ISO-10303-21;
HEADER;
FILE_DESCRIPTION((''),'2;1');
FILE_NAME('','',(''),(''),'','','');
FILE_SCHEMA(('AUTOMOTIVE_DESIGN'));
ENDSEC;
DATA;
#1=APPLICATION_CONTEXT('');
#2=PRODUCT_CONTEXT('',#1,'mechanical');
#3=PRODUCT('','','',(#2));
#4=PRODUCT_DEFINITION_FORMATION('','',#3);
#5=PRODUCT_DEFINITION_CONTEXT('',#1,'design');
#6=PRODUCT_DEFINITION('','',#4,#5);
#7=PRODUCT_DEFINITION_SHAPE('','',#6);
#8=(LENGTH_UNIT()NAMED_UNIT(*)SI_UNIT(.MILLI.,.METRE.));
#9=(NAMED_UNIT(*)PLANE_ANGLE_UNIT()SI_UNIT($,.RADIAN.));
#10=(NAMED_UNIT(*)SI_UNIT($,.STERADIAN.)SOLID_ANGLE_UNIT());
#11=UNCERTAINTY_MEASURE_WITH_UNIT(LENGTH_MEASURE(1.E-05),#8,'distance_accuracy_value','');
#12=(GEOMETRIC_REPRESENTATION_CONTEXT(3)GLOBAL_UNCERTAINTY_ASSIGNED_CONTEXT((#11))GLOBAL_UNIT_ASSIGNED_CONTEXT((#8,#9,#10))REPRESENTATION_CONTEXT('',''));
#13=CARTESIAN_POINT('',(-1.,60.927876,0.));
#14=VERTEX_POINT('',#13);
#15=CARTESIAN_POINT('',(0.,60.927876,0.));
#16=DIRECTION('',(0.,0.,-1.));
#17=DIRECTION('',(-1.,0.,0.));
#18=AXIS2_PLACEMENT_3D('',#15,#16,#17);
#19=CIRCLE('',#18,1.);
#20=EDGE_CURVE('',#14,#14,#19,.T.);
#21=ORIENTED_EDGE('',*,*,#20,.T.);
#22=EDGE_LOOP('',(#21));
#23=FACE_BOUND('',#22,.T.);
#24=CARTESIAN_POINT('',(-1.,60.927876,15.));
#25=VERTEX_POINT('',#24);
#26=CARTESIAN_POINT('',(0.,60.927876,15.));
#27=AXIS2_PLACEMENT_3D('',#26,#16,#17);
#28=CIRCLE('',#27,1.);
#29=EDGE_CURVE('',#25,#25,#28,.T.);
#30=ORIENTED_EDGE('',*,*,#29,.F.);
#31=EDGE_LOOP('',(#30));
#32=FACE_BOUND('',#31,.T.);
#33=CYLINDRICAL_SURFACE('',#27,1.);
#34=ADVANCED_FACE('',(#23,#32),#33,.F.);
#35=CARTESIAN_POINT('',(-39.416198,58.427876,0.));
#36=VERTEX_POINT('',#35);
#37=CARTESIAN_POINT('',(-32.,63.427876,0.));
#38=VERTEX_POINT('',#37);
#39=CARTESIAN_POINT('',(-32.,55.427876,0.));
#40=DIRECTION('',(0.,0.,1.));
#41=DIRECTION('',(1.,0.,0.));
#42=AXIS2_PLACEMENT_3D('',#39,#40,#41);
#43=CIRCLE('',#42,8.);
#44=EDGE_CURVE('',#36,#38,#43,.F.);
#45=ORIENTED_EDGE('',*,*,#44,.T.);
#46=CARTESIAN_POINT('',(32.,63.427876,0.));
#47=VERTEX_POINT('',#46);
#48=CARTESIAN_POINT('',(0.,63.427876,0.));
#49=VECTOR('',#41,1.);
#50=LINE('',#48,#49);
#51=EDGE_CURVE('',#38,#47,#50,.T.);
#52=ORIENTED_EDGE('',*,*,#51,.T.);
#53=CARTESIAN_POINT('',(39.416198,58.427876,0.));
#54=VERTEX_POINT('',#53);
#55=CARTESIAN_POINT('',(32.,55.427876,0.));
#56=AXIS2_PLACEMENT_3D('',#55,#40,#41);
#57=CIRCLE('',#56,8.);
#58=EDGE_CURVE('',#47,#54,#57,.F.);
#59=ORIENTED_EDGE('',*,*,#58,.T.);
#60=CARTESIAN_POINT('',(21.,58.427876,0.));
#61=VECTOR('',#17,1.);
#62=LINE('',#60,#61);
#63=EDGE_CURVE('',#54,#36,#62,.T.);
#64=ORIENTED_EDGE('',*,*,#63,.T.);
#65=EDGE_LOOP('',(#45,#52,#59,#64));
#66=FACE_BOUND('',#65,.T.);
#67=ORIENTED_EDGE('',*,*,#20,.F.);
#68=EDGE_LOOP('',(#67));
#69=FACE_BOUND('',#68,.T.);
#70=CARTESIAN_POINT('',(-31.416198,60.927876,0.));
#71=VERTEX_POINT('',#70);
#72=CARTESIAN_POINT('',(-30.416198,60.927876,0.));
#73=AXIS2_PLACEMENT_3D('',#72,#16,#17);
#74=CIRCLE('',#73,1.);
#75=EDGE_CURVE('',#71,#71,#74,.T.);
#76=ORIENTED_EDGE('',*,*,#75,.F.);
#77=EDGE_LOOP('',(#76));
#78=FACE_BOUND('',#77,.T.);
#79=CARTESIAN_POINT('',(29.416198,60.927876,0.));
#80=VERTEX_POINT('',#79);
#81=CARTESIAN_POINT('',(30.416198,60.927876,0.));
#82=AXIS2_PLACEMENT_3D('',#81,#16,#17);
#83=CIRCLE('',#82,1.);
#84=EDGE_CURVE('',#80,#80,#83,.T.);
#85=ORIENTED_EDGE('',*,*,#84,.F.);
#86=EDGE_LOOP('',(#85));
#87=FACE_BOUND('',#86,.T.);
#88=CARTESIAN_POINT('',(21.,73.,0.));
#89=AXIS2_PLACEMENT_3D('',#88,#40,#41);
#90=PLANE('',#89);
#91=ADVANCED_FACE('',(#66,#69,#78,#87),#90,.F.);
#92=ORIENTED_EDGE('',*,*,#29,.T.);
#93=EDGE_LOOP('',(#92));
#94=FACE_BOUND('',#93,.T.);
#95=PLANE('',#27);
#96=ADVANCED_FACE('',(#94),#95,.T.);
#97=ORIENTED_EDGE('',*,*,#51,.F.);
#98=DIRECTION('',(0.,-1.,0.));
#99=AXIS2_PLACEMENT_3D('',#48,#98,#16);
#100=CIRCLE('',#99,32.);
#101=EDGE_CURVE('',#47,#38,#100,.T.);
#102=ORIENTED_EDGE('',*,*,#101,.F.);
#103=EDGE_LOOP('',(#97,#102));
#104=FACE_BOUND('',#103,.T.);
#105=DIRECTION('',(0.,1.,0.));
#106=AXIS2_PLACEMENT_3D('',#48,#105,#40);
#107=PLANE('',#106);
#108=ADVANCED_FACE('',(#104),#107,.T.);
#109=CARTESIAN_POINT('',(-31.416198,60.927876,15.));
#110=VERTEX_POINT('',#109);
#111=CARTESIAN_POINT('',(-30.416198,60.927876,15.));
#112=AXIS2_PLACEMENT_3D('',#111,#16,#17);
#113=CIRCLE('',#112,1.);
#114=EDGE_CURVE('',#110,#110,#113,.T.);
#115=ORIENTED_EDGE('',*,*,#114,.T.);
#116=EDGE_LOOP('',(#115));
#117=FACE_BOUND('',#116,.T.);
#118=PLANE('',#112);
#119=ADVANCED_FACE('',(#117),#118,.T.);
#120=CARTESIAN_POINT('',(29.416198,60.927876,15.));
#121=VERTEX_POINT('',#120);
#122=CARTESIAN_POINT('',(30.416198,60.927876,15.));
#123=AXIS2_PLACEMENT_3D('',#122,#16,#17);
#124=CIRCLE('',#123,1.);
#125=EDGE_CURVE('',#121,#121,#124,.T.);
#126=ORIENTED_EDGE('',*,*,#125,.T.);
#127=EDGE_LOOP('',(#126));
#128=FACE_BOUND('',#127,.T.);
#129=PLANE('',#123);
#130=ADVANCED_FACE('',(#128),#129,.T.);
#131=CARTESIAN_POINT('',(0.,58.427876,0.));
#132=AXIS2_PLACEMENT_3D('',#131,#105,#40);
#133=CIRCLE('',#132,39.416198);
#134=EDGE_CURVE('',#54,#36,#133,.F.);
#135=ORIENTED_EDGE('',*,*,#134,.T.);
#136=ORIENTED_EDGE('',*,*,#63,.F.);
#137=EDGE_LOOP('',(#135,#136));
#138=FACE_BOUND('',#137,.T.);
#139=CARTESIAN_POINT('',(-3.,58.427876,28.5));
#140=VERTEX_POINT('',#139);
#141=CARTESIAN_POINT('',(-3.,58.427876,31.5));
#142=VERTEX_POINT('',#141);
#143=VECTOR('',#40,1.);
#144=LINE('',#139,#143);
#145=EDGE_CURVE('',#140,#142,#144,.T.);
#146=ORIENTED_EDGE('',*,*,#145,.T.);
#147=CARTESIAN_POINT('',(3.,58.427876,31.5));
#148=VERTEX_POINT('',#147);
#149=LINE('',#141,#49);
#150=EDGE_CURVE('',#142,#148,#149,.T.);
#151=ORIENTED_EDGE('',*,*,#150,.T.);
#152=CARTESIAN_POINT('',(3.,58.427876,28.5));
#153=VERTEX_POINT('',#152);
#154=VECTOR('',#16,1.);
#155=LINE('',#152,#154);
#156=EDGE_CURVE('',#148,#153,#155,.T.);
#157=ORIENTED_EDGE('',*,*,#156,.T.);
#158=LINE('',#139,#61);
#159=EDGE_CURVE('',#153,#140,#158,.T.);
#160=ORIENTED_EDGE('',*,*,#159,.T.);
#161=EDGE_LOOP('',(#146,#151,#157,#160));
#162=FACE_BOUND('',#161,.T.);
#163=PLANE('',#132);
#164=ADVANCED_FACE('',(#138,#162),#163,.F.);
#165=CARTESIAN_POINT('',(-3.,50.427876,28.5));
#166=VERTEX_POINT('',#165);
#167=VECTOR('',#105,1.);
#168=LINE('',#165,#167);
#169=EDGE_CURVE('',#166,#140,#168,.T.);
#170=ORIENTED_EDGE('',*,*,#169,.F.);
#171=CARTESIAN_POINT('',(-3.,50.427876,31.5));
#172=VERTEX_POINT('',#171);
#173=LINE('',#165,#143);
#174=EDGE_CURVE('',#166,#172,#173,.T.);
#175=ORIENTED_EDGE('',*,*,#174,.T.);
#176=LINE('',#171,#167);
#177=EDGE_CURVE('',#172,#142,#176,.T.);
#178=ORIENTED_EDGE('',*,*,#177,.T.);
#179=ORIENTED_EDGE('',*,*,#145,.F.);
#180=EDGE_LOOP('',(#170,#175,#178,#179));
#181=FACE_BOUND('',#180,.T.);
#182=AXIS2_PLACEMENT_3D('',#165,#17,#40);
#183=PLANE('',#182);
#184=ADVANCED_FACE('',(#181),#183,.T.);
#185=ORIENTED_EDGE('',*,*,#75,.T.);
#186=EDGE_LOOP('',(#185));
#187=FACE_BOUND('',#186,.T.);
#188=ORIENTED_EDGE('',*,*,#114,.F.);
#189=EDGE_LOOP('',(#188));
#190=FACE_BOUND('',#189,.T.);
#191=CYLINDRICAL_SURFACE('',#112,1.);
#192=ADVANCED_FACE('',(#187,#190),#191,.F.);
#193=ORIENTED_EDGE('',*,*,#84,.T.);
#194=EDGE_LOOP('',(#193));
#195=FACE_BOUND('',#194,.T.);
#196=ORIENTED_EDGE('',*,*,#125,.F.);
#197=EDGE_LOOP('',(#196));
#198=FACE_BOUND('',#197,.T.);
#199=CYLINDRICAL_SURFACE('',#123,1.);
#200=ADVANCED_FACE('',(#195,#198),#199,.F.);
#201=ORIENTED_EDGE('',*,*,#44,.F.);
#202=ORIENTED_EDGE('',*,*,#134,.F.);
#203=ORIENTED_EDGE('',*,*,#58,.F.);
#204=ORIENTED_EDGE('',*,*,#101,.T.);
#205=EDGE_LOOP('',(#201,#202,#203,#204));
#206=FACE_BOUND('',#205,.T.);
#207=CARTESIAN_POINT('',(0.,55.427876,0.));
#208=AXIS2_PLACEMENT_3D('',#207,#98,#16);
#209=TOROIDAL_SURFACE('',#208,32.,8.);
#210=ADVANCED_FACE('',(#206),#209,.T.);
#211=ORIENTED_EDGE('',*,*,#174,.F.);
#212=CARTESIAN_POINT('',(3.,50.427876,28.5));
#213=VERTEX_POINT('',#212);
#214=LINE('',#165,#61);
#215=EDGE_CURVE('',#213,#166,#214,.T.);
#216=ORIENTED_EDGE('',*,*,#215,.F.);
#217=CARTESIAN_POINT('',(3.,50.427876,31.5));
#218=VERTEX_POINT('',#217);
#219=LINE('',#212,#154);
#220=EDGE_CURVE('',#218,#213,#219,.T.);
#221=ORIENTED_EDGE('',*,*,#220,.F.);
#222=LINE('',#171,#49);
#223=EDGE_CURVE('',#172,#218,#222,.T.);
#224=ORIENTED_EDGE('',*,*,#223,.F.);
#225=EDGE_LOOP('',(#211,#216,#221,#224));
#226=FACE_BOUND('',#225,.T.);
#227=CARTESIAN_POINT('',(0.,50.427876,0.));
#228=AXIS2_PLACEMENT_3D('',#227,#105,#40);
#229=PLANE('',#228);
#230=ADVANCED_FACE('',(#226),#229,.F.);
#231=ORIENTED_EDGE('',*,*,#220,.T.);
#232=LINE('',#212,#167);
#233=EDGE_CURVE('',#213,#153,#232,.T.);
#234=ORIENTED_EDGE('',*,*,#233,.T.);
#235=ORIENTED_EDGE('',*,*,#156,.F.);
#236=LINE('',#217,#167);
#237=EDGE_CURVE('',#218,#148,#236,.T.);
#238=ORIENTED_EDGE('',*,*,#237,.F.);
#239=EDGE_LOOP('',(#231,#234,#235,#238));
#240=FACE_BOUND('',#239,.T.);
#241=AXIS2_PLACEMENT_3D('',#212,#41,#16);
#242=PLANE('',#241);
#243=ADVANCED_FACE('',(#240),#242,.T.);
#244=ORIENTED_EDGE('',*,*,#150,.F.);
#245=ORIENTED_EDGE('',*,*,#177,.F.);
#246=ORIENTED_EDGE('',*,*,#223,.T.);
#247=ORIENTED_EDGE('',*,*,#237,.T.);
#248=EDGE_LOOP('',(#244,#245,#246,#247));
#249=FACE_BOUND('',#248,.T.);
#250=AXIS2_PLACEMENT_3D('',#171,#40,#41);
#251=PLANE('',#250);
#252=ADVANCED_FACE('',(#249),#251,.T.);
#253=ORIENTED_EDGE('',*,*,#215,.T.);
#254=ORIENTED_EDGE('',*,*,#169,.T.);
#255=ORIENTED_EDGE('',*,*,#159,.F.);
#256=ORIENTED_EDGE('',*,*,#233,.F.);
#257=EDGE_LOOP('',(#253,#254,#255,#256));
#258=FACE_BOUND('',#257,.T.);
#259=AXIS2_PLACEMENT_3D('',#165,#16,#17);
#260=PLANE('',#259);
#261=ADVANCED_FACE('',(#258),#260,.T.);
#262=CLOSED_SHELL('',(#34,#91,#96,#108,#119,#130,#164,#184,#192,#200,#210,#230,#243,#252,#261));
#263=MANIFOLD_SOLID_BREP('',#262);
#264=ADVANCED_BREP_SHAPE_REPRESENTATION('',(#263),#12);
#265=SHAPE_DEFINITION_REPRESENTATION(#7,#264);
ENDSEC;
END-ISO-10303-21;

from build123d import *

# Parameters (mm, degrees)
CUT_EXTRUDE3_DEPTH           = 60
CUT_EXTRUDE5_DEPTH           = 2
CUT_EXTRUDE5_DEPTH_BACK      = 30
SKETCH9_R                    = 38
SKETCH9_R_2                  = 23
SKETCH19_W                   = 12
SKETCH19_H                   = 36.5
CUT_REVOLVE2_ANGLE           = 65
CUT_REVOLVE2_OTHER_WAY_ANGLE = 65
SKETCH21_W                   = 3.25
SKETCH21_H                   = 4
BOSS_EXTRUDE3_DEPTH          = 1.35
CIRPATTERN1_COUNT            = 5
CUT_EXTRUDE9_START           = -5
CUT_EXTRUDE9_DEPTH           = 5
SKETCH23_R                   = 10.5
CUT_EXTRUDE10_DEPTH          = 10
SKETCH24_W                   = 15
SKETCH24_H                   = 8
BOSS_EXTRUDE4_DEPTH          = 8
SKETCH26_W                   = 10
SKETCH26_H                   = 6
CUT_EXTRUDE11_DEPTH          = 10
SKETCH27_W                   = 4
SKETCH27_H                   = 5
CUT_EXTRUDE12_DEPTH          = 5
CUT_EXTRUDE14_DEPTH          = 2
CUT_EXTRUDE14_DEPTH_BACK     = 30
SKETCH29_R                   = 1
CUT_EXTRUDE15_DEPTH          = 15
FILLET1_R                    = 6
FILLET2_R                    = 8
INTERSECT1_DEPTH             = 58.427876097
SKETCH31_W                   = 6
SKETCH31_H                   = 3
BOSS_EXTRUDE7_DEPTH          = 8


# Read off the part's stored shape, not the designer's step: Cut-Extrude9, Intersect1
with BuildPart() as part:
    # Sketch1 → Revolve1 (revolve)
    with BuildSketch(Plane.XY, mode=Mode.PRIVATE) as revolve1_sk:
        with BuildLine():
            Line((0, 63.427876097), (32, 63.427876097))
            ThreePointArc((32, 63.427876097), (37.656854249, 61.084730346), (40, 55.427876097))
            Line((40, 55.427876097), (40, 28.846818009))
            ThreePointArc((40, 28.846818009), (38.792081772, 24.082439968), (35.460140376, 20.469057744))
            Line((35.460140376, 20.469057744), (28.539859624, 15.958818353))
            ThreePointArc((28.539859624, 15.958818353), (25.207918228, 12.345436129), (24, 7.581058088))
            Line((24, 7.581058088), (24, 3.25))
            Line((24, 3.25), (24.35, 3))
            Line((24.35, 3), (24.35, 0))
            Line((24.35, 0), (22.5, 0))
            Line((22.5, 0), (22.5, 12.5))
            ThreePointArc((22.5, 12.5), (22.353553391, 12.853553391), (22, 13))
            Line((22, 13), (0, 13))
            Line((0, 13), (0, 63.427876097))
        make_face()
    revolve(revolve1_sk.sketch.rotate(Axis((0, 0, 0), (0, 1, 0)), 90), axis=Axis((0, 0, 0), (0, 1, 0)))

    # Sketch11 → Cut-Extrude3 (cut)
    with BuildSketch(Plane(origin=(0, 13, 0), x_dir=(-1, 0, 0), z_dir=(0, -1, 0))):
        with BuildLine():
            Line((-21, 0), (21, 0))
            ThreePointArc((21, 0), (0, 21), (-21, 0))
        make_face()
    extrude(amount=-CUT_EXTRUDE3_DEPTH, mode=Mode.SUBTRACT)

    # Sketch9 → Cut-Extrude5 (cut, two sides: drawn at the far end of the back side and taken through both)
    with BuildSketch(Plane(origin=(0, 55.427876097, 0), x_dir=(1, 0, 0), z_dir=(0, 1, 0)).offset(-CUT_EXTRUDE5_DEPTH_BACK)):
        with Locations(Location((0, 0, 0), (0, 0, 270))):
            Circle(SKETCH9_R)
        with Locations(Location((0, 0, 0), (0, 0, 270))):
            Circle(SKETCH9_R_2, mode=Mode.SUBTRACT)
    extrude(amount=CUT_EXTRUDE5_DEPTH + CUT_EXTRUDE5_DEPTH_BACK, mode=Mode.SUBTRACT)

    # Sketch19 → Cut-Revolve2 (revolve, cut)
    with BuildSketch(Plane(origin=(0, 0, 0), x_dir=(0, 0, -1), z_dir=(1, 0, 0))):
        with Locations((-41.064715832, 37.177876097)):
            Rectangle(SKETCH19_W, SKETCH19_H)
    revolve(axis=Axis((0, 0, 0), (0, 1, 0)), revolution_arc=CUT_REVOLVE2_ANGLE, mode=Mode.SUBTRACT)

    # Sketch19 → Cut-Revolve2 other way (revolve, cut)
    with BuildSketch(Plane(origin=(0, 0, 0), x_dir=(0, 0, -1), z_dir=(1, 0, 0))):
        with Locations((-41.064715832, 37.177876097)):
            Rectangle(SKETCH19_W, SKETCH19_H)
    revolve(axis=Axis((0, 0, 0), (0, -1, 0)), revolution_arc=CUT_REVOLVE2_OTHER_WAY_ANGLE, mode=Mode.SUBTRACT)

    # Sketch21 → Boss-Extrude3 (add)
    with BuildSketch(Plane(origin=(0, 0, 22.5), x_dir=(-1, 0, 0), z_dir=(0, 0, -1))):
        with Locations((0, 2)):
            Rectangle(SKETCH21_W, SKETCH21_H)
    boss_extrude3 = extrude(amount=BOSS_EXTRUDE3_DEPTH)

    # CirPattern1: Boss-Extrude3 ×5 about axis
    cirpattern1_axis = Axis((0, 0, 0), (0, 1, 0))
    for i in range(1, CIRPATTERN1_COUNT):
        add(boss_extrude3.rotate(cirpattern1_axis, i * 360 / CIRPATTERN1_COUNT))

    # Cut-Extrude9 outline → Cut-Extrude9 (cut)
    with BuildSketch(Plane(origin=(0, 63.427876097, 0), x_dir=(1, 0, 0), z_dir=(0, 1, 0)).offset(CUT_EXTRUDE9_START)):
        with BuildLine():
            ThreePointArc((40, 0), (0, 40), (-40, 0))
            Line((-40, 0), (-21, 0))
            ThreePointArc((-21, 0), (0, 21), (21, 0))
            Line((21, 0), (40, 0))
        make_face()
    extrude(amount=CUT_EXTRUDE9_DEPTH, mode=Mode.SUBTRACT)

    # Sketch23 → Cut-Extrude10 (cut)
    with BuildSketch(Plane(origin=(0, 0, -40), x_dir=(-1, 0, 0), z_dir=(0, 0, -1))):
        with Locations((0, 42.137876097)):
            Circle(SKETCH23_R)
    extrude(amount=-CUT_EXTRUDE10_DEPTH, mode=Mode.SUBTRACT)

    # Sketch24 → Boss-Extrude4 (add)
    with BuildSketch(Plane(origin=(0, 58.427876097, 0), x_dir=(1, 0, 0), z_dir=(0, 1, 0))):
        with Locations((0, 30)):
            Rectangle(SKETCH24_W, SKETCH24_H)
    extrude(amount=-BOSS_EXTRUDE4_DEPTH)

    # Sketch26 → Cut-Extrude11 (cut)
    with BuildSketch(Plane(origin=(0, 58.427876097, 0), x_dir=(1, 0, 0), z_dir=(0, 1, 0))):
        with Locations((0, 30)):
            Rectangle(SKETCH26_W, SKETCH26_H)
    extrude(amount=-CUT_EXTRUDE11_DEPTH, mode=Mode.SUBTRACT)

    # Sketch27 → Cut-Extrude12 (cut)
    with BuildSketch(Plane(origin=(7.5, 0, 0), x_dir=(0, 0, -1), z_dir=(1, 0, 0))):
        with Locations((30, 53.927876097)):
            Rectangle(SKETCH27_W, SKETCH27_H)
    extrude(amount=-CUT_EXTRUDE12_DEPTH, mode=Mode.SUBTRACT)

    # Sketch28 → Cut-Extrude14 (cut, two sides: drawn at the far end of the back side and taken through both)
    with BuildSketch(Plane(origin=(0, 55.427876097, 0), x_dir=(1, 0, 0), z_dir=(0, 1, 0)).offset(-CUT_EXTRUDE14_DEPTH_BACK)):
        with BuildLine():
            Line((-22.912878475, -2), (22.912878475, -2))
            ThreePointArc((22.912878475, -2), (0, -23), (-22.912878475, -2))
        make_face()
    extrude(amount=CUT_EXTRUDE14_DEPTH + CUT_EXTRUDE14_DEPTH_BACK, mode=Mode.SUBTRACT)

    # Sketch29 → Cut-Extrude15 (cut)
    with BuildSketch(Plane(origin=(0, 0, 0), x_dir=(-1, 0, 0), z_dir=(0, 0, -1))):
        with Locations((-30.416198487, 60.927876097)):
            Circle(SKETCH29_R)
        with Locations((30.416198487, 60.927876097)):
            Circle(SKETCH29_R)
        with Locations((0, 60.927876097)):
            Circle(SKETCH29_R)
    extrude(amount=-CUT_EXTRUDE15_DEPTH, mode=Mode.SUBTRACT)

    # Fillet1
    fillet1_edges = [part.edges().sort_by_distance(p)[0] for p in [
        (21, 35.713938048, 0),
        (-21, 35.713938048, 0),
    ]]
    fillet(fillet1_edges, radius=FILLET1_R)

    # Fillet2
    fillet2_edges = [part.edges().sort_by_distance(p)[0] for p in [
        (-22.912878475, 41.427876097, 2),
        (22.912878475, 41.427876097, 2),
    ]]
    fillet(fillet2_edges, radius=FILLET2_R)

    # Intersect1 outline → Intersect1 (cut)
    with BuildSketch(Plane(origin=(0, 0, 0), x_dir=(1, 0, 0), z_dir=(0, 1, 0))):
        with BuildLine():
            Line((-37.508702776, -13.895942431), (-42, -15.355253362))
            Line((-42, -15.355253362), (-42, -41))
            Line((-42, -41), (42, -41))
            Line((42, -41), (42, -15.355253362))
            Line((42, -15.355253362), (37.508702776, -13.895942431))
            ThreePointArc((37.508702776, -13.895942431), (0, 40), (-37.508702776, -13.895942431))
        make_face()
        with BuildLine():
            ThreePointArc((19.246817919, 8.4), (18.767687244, 2.713664655), (13.747727085, 0))
            Line((13.747727085, 0), (-13.747727085, 0))
            ThreePointArc((-13.747727085, 0), (-18.767687244, 2.713664655), (-19.246817919, 8.4))
            ThreePointArc((-19.246817919, 8.4), (0, 21), (19.246817919, 8.4))
        make_face(mode=Mode.SUBTRACT)
    extrude(amount=INTERSECT1_DEPTH, mode=Mode.SUBTRACT)

    # Sketch31 → Boss-Extrude7 (add)
    with BuildSketch(Plane(origin=(0, 58.427876097, 0), x_dir=(1, 0, 0), z_dir=(0, 1, 0))):
        with Locations((0, -30)):
            Rectangle(SKETCH31_W, SKETCH31_H)
    extrude(amount=-BOSS_EXTRUDE7_DEPTH)


solid = part.part
